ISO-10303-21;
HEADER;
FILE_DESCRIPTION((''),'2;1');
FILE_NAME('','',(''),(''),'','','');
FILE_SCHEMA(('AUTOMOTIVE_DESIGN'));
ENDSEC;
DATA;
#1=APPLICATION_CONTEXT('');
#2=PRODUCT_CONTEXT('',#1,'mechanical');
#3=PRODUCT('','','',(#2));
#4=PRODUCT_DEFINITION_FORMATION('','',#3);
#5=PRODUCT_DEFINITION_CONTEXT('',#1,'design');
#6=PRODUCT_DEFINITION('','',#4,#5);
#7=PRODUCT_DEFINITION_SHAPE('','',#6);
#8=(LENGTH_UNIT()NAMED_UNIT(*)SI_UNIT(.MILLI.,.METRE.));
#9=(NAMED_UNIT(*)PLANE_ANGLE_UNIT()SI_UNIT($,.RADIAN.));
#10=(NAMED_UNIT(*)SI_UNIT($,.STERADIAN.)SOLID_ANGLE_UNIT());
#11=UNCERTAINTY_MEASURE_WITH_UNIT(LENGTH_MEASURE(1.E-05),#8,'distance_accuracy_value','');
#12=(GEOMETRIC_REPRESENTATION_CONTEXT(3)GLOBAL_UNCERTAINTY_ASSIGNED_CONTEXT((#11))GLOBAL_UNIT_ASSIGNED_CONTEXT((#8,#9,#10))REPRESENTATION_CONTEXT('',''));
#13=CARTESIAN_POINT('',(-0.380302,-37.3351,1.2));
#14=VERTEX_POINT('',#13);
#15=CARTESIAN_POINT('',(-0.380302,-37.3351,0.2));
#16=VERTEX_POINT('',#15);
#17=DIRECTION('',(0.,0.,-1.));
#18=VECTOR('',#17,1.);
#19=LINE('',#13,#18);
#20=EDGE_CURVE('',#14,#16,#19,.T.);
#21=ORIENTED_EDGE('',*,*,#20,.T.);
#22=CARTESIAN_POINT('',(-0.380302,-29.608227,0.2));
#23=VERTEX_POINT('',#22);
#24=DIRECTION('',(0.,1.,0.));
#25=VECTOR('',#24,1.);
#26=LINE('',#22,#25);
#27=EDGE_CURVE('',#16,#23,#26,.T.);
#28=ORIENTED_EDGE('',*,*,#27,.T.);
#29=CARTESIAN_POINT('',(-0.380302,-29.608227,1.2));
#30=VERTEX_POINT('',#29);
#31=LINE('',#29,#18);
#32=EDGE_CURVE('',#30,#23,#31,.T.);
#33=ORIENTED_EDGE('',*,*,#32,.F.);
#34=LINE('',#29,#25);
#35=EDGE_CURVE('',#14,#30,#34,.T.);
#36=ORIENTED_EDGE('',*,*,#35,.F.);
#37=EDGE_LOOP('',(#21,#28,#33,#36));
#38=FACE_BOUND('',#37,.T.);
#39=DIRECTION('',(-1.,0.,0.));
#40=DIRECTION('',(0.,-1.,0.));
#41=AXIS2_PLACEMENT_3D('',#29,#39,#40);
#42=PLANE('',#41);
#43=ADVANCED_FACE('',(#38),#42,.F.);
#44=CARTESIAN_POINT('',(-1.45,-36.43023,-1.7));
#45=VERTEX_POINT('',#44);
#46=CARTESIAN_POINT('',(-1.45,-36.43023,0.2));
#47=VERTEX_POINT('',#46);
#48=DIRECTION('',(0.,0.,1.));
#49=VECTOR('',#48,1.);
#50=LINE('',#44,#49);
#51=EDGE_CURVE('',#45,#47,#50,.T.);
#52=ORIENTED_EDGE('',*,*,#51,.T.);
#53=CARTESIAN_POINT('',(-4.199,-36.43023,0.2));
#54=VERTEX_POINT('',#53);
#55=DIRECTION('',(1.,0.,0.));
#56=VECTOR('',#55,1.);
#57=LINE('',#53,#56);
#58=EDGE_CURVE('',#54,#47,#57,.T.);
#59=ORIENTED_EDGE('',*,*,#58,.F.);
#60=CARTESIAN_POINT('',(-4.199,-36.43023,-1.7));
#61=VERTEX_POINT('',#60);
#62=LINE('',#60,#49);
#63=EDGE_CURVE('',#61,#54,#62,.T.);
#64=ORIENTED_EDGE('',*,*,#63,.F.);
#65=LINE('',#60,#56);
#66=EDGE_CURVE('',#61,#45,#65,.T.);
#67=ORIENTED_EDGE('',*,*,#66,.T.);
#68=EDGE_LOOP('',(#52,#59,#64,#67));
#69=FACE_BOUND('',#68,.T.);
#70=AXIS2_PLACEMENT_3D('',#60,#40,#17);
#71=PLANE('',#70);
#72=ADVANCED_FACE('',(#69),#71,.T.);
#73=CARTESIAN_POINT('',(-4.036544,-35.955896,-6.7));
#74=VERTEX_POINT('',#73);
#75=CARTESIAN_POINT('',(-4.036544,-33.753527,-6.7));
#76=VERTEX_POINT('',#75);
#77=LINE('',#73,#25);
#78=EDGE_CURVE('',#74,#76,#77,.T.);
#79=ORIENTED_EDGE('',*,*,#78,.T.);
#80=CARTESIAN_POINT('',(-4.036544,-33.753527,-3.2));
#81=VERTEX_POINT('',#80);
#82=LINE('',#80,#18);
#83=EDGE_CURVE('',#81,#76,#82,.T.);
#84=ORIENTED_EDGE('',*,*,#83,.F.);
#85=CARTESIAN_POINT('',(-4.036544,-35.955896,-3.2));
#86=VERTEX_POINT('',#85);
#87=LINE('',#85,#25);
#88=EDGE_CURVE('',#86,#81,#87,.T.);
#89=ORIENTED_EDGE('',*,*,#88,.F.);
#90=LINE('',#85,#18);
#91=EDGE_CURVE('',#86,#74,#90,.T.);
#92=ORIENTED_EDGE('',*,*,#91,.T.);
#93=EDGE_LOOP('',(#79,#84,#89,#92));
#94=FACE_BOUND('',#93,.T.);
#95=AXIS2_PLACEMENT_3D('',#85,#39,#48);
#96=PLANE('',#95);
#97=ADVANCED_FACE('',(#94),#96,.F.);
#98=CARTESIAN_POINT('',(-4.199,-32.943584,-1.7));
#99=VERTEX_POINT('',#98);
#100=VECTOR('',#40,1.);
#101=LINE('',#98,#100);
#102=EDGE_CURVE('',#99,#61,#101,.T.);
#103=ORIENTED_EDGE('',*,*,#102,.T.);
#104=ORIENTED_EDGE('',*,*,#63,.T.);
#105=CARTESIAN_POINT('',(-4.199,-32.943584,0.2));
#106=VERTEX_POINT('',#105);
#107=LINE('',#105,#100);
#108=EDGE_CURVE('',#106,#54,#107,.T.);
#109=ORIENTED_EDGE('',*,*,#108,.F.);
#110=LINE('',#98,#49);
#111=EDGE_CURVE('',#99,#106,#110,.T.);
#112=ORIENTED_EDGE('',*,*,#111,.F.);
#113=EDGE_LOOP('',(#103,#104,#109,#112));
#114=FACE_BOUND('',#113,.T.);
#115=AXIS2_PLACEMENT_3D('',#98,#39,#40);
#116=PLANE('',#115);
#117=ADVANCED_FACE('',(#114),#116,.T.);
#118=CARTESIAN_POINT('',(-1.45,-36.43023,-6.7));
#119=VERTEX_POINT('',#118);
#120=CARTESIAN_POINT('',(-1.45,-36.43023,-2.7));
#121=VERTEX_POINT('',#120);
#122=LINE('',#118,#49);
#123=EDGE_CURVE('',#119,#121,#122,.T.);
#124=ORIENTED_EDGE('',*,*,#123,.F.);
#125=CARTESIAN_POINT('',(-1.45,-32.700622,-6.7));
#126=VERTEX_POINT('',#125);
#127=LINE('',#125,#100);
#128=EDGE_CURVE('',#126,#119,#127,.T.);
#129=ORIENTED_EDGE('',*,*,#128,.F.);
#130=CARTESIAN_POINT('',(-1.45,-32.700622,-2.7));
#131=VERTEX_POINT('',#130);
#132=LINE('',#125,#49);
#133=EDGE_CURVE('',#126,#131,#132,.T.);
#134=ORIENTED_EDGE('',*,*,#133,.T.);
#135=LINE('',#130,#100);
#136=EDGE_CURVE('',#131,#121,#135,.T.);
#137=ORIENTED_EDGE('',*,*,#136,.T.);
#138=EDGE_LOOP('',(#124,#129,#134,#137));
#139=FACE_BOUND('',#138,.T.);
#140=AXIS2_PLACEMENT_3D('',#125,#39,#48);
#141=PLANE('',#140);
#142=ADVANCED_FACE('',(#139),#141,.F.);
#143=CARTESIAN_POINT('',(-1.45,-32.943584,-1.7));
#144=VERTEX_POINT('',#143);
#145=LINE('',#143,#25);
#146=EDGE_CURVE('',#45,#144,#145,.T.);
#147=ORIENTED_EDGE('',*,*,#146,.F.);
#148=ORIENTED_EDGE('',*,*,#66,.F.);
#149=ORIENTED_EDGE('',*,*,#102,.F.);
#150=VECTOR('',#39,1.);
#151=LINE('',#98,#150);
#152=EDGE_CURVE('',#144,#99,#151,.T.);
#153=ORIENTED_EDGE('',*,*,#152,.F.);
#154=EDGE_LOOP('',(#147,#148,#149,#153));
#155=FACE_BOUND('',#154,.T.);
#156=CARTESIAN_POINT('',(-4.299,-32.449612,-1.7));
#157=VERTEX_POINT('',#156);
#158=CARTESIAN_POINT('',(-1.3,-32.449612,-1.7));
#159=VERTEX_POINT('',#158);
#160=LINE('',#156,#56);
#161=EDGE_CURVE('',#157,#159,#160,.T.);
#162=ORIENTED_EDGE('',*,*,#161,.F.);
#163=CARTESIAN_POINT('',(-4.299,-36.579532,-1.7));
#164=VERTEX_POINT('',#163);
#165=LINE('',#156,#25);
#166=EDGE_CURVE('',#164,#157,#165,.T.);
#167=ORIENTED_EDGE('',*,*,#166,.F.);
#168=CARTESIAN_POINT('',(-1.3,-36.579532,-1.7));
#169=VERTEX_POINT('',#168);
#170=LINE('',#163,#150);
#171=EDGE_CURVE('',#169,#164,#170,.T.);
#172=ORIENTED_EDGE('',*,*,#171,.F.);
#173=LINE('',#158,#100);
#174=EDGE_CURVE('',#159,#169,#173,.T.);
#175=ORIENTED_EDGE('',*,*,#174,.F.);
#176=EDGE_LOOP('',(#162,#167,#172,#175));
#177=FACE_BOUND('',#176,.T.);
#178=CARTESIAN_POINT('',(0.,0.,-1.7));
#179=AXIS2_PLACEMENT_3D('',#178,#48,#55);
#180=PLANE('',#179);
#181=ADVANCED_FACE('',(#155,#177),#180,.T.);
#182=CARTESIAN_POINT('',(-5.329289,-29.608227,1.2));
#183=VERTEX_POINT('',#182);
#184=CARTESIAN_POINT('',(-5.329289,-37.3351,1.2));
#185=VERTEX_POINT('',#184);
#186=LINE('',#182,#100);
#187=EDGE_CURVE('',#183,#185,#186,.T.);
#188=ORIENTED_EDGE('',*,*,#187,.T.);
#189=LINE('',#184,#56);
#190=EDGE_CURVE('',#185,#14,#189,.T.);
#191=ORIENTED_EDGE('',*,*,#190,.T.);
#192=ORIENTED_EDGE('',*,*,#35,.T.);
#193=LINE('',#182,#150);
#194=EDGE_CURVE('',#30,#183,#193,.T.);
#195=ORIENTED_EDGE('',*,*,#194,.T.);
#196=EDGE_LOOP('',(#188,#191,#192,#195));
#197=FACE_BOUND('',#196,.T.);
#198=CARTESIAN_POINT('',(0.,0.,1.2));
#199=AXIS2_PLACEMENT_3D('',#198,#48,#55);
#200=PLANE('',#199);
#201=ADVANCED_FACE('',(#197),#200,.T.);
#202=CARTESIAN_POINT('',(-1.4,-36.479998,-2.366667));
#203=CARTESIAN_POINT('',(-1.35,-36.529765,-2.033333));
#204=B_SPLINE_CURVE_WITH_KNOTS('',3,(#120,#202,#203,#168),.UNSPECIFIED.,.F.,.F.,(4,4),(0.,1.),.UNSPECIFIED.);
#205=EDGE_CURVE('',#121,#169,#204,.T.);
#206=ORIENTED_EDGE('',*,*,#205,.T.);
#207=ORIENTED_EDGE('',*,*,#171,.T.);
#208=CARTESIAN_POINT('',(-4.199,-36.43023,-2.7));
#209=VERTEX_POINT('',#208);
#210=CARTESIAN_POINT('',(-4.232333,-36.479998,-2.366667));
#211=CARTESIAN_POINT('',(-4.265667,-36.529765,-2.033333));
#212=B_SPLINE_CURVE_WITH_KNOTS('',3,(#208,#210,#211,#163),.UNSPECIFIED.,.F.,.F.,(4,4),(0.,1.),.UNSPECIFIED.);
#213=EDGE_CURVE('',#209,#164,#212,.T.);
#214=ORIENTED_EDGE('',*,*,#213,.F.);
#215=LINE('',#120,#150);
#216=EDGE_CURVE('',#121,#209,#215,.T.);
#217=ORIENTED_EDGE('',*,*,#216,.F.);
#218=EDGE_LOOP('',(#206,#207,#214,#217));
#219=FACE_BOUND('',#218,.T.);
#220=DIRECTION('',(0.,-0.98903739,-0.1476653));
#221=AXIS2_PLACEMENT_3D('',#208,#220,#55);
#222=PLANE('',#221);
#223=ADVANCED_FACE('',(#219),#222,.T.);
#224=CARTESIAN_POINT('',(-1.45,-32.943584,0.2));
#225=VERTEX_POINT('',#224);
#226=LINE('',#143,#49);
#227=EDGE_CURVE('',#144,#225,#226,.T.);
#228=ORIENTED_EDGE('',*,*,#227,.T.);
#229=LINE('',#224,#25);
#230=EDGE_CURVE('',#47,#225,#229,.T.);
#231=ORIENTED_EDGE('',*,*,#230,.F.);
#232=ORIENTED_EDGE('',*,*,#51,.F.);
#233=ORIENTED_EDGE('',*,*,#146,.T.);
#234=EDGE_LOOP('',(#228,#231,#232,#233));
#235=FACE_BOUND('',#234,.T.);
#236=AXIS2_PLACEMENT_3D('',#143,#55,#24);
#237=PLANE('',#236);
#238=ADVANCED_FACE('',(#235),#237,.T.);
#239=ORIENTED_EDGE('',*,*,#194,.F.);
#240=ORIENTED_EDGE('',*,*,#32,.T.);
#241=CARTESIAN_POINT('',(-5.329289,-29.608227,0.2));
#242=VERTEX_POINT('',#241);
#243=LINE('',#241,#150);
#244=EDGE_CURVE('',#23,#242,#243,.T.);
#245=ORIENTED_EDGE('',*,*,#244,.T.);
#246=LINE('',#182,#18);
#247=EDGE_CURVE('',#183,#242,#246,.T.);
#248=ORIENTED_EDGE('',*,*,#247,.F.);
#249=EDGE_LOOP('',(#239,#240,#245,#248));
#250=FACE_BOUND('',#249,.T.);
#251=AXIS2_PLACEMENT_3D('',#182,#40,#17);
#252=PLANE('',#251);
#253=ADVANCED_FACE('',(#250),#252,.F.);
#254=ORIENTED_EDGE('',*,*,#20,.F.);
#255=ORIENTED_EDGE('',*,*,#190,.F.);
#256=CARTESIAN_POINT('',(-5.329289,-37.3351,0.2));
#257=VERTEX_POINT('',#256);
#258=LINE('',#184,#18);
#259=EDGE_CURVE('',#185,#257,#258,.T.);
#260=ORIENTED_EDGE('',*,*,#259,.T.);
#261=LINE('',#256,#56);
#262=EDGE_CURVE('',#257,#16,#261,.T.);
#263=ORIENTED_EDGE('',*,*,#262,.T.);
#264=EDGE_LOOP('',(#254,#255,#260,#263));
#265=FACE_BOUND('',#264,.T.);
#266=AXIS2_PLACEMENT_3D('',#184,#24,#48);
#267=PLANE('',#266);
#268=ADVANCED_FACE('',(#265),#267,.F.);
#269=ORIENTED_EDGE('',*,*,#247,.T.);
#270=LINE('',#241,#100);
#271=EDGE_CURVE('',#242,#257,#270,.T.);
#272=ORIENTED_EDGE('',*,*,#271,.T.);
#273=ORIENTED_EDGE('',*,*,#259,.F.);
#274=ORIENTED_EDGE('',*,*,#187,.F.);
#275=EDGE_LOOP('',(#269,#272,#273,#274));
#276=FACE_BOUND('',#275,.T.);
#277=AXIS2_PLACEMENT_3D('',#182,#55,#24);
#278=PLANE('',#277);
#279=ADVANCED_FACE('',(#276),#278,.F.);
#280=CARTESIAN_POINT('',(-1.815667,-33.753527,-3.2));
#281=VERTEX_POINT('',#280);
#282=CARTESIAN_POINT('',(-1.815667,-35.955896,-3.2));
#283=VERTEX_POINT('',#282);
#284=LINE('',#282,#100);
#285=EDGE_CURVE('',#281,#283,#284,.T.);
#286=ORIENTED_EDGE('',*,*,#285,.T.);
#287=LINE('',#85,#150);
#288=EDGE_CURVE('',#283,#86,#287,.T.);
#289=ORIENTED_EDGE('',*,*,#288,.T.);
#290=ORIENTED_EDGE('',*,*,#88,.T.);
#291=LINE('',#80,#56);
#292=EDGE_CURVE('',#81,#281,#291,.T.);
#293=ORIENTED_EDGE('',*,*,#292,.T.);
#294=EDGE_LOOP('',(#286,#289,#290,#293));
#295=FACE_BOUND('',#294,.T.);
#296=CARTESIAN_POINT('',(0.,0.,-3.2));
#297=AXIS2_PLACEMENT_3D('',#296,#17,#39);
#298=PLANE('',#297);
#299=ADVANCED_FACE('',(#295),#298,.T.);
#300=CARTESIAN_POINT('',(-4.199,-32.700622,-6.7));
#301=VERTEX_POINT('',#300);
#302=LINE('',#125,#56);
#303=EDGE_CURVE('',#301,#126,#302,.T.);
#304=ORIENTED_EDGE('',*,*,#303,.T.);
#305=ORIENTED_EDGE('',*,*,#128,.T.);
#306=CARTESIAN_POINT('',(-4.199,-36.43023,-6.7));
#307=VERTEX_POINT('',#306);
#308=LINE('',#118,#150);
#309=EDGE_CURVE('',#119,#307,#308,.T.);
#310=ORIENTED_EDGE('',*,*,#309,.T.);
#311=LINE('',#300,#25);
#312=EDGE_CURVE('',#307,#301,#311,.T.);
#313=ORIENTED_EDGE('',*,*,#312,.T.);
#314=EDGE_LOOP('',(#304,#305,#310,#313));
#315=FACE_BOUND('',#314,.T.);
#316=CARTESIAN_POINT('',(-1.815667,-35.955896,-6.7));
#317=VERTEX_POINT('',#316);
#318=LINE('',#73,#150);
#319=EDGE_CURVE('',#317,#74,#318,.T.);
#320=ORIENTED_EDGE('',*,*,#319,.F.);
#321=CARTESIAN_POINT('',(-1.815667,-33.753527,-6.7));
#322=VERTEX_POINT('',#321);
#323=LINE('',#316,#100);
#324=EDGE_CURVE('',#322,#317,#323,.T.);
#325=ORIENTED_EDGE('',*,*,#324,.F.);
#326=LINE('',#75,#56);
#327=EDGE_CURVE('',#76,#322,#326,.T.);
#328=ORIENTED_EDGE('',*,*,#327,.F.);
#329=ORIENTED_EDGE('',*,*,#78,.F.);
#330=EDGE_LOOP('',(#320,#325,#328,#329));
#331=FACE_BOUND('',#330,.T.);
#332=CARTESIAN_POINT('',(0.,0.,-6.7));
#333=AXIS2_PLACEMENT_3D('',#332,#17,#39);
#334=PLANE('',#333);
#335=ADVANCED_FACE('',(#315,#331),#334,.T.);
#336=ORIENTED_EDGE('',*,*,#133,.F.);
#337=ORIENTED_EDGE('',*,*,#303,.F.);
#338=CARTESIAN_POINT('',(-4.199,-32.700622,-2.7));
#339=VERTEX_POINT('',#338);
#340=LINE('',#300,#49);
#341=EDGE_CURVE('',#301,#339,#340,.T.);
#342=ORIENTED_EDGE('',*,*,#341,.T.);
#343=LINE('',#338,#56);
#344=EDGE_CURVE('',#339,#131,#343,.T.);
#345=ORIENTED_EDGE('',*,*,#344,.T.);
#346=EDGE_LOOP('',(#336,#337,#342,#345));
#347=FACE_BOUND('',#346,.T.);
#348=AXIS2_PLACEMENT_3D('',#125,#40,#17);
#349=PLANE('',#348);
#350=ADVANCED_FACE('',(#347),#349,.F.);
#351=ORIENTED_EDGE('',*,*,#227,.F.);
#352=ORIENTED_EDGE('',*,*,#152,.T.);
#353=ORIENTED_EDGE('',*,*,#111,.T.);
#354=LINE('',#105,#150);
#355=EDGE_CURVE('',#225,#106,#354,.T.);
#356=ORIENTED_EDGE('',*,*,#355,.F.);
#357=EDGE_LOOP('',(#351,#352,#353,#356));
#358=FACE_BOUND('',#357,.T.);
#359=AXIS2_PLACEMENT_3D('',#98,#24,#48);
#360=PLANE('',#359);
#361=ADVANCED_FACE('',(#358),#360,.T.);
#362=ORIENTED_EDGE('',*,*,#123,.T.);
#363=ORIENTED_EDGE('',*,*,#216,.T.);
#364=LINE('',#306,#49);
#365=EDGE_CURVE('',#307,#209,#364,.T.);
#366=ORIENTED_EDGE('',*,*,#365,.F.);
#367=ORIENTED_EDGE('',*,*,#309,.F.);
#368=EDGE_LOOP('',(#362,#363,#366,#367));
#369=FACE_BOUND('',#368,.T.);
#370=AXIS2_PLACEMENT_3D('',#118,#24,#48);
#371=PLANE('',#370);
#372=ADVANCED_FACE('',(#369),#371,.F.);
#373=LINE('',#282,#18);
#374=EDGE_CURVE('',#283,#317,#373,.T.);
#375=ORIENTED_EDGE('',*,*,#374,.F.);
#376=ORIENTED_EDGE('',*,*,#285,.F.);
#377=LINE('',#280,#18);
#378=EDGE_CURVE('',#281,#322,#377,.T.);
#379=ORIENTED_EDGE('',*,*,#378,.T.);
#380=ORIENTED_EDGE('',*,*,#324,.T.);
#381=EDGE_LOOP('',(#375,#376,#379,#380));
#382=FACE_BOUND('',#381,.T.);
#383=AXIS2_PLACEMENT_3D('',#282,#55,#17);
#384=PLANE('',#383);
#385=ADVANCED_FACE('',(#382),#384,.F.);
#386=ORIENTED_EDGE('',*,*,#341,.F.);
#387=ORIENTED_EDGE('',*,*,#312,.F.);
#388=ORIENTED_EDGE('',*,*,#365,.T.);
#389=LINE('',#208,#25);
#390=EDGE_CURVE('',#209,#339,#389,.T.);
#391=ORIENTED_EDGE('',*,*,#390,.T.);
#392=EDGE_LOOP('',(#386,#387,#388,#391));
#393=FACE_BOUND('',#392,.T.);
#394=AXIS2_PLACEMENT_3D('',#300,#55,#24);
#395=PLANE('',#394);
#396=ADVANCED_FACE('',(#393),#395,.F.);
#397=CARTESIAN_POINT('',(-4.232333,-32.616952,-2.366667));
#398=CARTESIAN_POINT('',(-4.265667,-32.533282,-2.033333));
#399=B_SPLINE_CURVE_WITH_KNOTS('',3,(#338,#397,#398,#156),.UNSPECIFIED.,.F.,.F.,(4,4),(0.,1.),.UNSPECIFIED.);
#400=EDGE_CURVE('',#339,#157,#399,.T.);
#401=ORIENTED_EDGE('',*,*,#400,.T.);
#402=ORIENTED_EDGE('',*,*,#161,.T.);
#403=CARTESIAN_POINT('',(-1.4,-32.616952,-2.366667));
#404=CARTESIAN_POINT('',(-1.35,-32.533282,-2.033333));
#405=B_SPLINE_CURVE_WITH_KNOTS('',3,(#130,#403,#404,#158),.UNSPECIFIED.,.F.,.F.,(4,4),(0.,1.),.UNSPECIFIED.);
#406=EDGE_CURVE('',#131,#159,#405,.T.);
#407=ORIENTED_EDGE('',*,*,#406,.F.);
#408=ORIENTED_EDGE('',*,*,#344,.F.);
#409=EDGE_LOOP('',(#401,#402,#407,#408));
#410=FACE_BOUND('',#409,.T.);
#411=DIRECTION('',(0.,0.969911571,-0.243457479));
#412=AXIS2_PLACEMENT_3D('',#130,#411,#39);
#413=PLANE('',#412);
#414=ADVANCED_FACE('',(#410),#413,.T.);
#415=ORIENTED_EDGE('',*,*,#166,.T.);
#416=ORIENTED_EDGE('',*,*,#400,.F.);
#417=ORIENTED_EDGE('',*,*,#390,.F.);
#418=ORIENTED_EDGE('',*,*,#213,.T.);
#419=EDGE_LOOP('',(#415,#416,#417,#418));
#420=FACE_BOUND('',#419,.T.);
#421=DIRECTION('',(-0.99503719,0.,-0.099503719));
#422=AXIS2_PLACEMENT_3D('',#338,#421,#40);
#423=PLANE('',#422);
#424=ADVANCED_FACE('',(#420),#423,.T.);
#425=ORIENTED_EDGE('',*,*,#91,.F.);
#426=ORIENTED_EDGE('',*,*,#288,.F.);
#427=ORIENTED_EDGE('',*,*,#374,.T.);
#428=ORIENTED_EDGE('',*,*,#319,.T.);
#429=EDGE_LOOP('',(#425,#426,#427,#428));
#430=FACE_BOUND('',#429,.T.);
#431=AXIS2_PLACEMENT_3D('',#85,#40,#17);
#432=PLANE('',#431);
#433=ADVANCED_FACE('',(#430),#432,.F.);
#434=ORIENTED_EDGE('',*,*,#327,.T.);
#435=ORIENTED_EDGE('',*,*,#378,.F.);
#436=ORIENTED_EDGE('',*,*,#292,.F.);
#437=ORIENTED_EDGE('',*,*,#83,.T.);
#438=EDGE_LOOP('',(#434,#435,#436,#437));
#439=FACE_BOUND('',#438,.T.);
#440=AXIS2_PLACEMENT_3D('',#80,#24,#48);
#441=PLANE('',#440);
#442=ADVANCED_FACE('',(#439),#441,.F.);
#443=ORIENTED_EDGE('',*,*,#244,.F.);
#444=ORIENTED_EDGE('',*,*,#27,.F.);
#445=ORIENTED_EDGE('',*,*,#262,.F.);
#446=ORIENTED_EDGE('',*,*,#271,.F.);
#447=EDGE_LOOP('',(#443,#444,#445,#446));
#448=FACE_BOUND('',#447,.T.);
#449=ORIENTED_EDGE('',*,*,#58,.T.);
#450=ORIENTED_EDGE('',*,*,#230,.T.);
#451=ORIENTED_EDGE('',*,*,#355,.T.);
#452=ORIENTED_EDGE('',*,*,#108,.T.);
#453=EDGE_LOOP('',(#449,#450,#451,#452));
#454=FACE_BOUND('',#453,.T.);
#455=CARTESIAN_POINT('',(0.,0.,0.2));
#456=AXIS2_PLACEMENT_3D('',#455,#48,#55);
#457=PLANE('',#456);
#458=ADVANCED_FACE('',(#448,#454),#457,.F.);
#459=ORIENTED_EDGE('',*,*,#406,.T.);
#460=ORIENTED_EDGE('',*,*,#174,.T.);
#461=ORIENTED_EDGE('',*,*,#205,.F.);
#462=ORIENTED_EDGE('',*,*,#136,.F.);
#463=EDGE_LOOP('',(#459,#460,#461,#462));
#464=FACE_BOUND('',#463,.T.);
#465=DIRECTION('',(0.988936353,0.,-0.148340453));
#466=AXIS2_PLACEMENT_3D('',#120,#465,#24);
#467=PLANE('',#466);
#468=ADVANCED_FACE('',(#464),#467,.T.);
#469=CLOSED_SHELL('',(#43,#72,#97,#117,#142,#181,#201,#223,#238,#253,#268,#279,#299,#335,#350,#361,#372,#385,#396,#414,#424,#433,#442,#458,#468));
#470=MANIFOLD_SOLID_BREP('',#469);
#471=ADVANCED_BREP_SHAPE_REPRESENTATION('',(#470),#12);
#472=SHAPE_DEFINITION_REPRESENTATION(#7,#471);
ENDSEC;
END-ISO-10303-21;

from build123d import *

# Parameters (mm, degrees)
EXTRUDE_1_DEPTH      = 0.2
EXTRUDE_1_DEPTH_BACK = 1.7
SKETCH_2_W           = 2.749
SKETCH_2_H           = 3.486646178
SKETCH_3_W           = 4.948986656
SKETCH_3_H           = 7.726872963
EXTRUDE_2_DEPTH      = 1
SKETCH_8_W           = 2.749
SKETCH_8_H           = 3.729608675
EXTRUDE_3_DEPTH      = 4
SKETCH_9_W           = 2.220876602
SKETCH_9_H           = 2.202369297
CUT_EXTRUDE_1_DEPTH  = 3.5


with BuildPart() as part:
    # 草图2 → 凸台-拉伸1 (new, two sides: drawn at the far end of the back side and taken through both)
    with BuildSketch(Plane.XY.offset(-EXTRUDE_1_DEPTH_BACK)):
        with Locations((-2.824500159, -34.686907223)):
            Rectangle(SKETCH_2_W, SKETCH_2_H)
    extrude(amount=EXTRUDE_1_DEPTH + EXTRUDE_1_DEPTH_BACK)

    # 草图3 → 凸台-拉伸2 (add)
    with BuildSketch(Plane.XY.offset(0.2)):
        with Locations((-2.854795759, -33.471663218)):
            Rectangle(SKETCH_3_W, SKETCH_3_H)
    extrude(amount=EXTRUDE_2_DEPTH)

    # 放样1: read off the stored shape, not the designer's step
    # 放样1: loft between two sections, ruled curve by curve
    loft_1_from = [
        Edge.make_line((-1.450000159, -32.700621637, -2.7), (-1.450000159, -36.430230312, -2.7)),
        Edge.make_line((-1.450000159, -36.430230312, -2.7), (-4.199000159, -36.430230312, -2.7)),
        Edge.make_line((-4.199000159, -36.430230312, -2.7), (-4.199000159, -32.700621637, -2.7)),
        Edge.make_line((-4.199000159, -32.700621637, -2.7), (-1.450000159, -32.700621637, -2.7)),
    ]
    loft_1_to = [
        Edge.make_line((-1.300000159, -32.449611662, -1.7), (-1.300000159, -36.579532352, -1.7)),
        Edge.make_line((-1.300000159, -36.579532352, -1.7), (-4.299000159, -36.579532352, -1.7)),
        Edge.make_line((-4.299000159, -36.579532352, -1.7), (-4.299000159, -32.449611662, -1.7)),
        Edge.make_line((-4.299000159, -32.449611662, -1.7), (-1.300000159, -32.449611662, -1.7)),
    ]
    loft_1 = Solid(Shell([*[Face.make_surface_from_curves(loft_1_from[k], loft_1_to[k]) for k in range(4)], Face(Wire(loft_1_from)), Face(Wire(loft_1_to))]))
    add(loft_1)

    # 草图8 → 凸台-拉伸3 (add)
    with BuildSketch(Plane(origin=(0, 0, -2.7), x_dir=(-1, 0, 0), z_dir=(0, 0, -1))):
        with Locations((2.824500159, -34.565425975)):
            Rectangle(SKETCH_8_W, SKETCH_8_H)
    extrude(amount=EXTRUDE_3_DEPTH)

    # 草图9 → 切除-拉伸1 (cut)
    with BuildSketch(Plane(origin=(0, 0, -6.7), x_dir=(-1, 0, 0), z_dir=(0, 0, -1))):
        with Locations((2.92610545, -34.854711182)):
            Rectangle(SKETCH_9_W, SKETCH_9_H)
    extrude(amount=-CUT_EXTRUDE_1_DEPTH, mode=Mode.SUBTRACT)


solid = part.part
